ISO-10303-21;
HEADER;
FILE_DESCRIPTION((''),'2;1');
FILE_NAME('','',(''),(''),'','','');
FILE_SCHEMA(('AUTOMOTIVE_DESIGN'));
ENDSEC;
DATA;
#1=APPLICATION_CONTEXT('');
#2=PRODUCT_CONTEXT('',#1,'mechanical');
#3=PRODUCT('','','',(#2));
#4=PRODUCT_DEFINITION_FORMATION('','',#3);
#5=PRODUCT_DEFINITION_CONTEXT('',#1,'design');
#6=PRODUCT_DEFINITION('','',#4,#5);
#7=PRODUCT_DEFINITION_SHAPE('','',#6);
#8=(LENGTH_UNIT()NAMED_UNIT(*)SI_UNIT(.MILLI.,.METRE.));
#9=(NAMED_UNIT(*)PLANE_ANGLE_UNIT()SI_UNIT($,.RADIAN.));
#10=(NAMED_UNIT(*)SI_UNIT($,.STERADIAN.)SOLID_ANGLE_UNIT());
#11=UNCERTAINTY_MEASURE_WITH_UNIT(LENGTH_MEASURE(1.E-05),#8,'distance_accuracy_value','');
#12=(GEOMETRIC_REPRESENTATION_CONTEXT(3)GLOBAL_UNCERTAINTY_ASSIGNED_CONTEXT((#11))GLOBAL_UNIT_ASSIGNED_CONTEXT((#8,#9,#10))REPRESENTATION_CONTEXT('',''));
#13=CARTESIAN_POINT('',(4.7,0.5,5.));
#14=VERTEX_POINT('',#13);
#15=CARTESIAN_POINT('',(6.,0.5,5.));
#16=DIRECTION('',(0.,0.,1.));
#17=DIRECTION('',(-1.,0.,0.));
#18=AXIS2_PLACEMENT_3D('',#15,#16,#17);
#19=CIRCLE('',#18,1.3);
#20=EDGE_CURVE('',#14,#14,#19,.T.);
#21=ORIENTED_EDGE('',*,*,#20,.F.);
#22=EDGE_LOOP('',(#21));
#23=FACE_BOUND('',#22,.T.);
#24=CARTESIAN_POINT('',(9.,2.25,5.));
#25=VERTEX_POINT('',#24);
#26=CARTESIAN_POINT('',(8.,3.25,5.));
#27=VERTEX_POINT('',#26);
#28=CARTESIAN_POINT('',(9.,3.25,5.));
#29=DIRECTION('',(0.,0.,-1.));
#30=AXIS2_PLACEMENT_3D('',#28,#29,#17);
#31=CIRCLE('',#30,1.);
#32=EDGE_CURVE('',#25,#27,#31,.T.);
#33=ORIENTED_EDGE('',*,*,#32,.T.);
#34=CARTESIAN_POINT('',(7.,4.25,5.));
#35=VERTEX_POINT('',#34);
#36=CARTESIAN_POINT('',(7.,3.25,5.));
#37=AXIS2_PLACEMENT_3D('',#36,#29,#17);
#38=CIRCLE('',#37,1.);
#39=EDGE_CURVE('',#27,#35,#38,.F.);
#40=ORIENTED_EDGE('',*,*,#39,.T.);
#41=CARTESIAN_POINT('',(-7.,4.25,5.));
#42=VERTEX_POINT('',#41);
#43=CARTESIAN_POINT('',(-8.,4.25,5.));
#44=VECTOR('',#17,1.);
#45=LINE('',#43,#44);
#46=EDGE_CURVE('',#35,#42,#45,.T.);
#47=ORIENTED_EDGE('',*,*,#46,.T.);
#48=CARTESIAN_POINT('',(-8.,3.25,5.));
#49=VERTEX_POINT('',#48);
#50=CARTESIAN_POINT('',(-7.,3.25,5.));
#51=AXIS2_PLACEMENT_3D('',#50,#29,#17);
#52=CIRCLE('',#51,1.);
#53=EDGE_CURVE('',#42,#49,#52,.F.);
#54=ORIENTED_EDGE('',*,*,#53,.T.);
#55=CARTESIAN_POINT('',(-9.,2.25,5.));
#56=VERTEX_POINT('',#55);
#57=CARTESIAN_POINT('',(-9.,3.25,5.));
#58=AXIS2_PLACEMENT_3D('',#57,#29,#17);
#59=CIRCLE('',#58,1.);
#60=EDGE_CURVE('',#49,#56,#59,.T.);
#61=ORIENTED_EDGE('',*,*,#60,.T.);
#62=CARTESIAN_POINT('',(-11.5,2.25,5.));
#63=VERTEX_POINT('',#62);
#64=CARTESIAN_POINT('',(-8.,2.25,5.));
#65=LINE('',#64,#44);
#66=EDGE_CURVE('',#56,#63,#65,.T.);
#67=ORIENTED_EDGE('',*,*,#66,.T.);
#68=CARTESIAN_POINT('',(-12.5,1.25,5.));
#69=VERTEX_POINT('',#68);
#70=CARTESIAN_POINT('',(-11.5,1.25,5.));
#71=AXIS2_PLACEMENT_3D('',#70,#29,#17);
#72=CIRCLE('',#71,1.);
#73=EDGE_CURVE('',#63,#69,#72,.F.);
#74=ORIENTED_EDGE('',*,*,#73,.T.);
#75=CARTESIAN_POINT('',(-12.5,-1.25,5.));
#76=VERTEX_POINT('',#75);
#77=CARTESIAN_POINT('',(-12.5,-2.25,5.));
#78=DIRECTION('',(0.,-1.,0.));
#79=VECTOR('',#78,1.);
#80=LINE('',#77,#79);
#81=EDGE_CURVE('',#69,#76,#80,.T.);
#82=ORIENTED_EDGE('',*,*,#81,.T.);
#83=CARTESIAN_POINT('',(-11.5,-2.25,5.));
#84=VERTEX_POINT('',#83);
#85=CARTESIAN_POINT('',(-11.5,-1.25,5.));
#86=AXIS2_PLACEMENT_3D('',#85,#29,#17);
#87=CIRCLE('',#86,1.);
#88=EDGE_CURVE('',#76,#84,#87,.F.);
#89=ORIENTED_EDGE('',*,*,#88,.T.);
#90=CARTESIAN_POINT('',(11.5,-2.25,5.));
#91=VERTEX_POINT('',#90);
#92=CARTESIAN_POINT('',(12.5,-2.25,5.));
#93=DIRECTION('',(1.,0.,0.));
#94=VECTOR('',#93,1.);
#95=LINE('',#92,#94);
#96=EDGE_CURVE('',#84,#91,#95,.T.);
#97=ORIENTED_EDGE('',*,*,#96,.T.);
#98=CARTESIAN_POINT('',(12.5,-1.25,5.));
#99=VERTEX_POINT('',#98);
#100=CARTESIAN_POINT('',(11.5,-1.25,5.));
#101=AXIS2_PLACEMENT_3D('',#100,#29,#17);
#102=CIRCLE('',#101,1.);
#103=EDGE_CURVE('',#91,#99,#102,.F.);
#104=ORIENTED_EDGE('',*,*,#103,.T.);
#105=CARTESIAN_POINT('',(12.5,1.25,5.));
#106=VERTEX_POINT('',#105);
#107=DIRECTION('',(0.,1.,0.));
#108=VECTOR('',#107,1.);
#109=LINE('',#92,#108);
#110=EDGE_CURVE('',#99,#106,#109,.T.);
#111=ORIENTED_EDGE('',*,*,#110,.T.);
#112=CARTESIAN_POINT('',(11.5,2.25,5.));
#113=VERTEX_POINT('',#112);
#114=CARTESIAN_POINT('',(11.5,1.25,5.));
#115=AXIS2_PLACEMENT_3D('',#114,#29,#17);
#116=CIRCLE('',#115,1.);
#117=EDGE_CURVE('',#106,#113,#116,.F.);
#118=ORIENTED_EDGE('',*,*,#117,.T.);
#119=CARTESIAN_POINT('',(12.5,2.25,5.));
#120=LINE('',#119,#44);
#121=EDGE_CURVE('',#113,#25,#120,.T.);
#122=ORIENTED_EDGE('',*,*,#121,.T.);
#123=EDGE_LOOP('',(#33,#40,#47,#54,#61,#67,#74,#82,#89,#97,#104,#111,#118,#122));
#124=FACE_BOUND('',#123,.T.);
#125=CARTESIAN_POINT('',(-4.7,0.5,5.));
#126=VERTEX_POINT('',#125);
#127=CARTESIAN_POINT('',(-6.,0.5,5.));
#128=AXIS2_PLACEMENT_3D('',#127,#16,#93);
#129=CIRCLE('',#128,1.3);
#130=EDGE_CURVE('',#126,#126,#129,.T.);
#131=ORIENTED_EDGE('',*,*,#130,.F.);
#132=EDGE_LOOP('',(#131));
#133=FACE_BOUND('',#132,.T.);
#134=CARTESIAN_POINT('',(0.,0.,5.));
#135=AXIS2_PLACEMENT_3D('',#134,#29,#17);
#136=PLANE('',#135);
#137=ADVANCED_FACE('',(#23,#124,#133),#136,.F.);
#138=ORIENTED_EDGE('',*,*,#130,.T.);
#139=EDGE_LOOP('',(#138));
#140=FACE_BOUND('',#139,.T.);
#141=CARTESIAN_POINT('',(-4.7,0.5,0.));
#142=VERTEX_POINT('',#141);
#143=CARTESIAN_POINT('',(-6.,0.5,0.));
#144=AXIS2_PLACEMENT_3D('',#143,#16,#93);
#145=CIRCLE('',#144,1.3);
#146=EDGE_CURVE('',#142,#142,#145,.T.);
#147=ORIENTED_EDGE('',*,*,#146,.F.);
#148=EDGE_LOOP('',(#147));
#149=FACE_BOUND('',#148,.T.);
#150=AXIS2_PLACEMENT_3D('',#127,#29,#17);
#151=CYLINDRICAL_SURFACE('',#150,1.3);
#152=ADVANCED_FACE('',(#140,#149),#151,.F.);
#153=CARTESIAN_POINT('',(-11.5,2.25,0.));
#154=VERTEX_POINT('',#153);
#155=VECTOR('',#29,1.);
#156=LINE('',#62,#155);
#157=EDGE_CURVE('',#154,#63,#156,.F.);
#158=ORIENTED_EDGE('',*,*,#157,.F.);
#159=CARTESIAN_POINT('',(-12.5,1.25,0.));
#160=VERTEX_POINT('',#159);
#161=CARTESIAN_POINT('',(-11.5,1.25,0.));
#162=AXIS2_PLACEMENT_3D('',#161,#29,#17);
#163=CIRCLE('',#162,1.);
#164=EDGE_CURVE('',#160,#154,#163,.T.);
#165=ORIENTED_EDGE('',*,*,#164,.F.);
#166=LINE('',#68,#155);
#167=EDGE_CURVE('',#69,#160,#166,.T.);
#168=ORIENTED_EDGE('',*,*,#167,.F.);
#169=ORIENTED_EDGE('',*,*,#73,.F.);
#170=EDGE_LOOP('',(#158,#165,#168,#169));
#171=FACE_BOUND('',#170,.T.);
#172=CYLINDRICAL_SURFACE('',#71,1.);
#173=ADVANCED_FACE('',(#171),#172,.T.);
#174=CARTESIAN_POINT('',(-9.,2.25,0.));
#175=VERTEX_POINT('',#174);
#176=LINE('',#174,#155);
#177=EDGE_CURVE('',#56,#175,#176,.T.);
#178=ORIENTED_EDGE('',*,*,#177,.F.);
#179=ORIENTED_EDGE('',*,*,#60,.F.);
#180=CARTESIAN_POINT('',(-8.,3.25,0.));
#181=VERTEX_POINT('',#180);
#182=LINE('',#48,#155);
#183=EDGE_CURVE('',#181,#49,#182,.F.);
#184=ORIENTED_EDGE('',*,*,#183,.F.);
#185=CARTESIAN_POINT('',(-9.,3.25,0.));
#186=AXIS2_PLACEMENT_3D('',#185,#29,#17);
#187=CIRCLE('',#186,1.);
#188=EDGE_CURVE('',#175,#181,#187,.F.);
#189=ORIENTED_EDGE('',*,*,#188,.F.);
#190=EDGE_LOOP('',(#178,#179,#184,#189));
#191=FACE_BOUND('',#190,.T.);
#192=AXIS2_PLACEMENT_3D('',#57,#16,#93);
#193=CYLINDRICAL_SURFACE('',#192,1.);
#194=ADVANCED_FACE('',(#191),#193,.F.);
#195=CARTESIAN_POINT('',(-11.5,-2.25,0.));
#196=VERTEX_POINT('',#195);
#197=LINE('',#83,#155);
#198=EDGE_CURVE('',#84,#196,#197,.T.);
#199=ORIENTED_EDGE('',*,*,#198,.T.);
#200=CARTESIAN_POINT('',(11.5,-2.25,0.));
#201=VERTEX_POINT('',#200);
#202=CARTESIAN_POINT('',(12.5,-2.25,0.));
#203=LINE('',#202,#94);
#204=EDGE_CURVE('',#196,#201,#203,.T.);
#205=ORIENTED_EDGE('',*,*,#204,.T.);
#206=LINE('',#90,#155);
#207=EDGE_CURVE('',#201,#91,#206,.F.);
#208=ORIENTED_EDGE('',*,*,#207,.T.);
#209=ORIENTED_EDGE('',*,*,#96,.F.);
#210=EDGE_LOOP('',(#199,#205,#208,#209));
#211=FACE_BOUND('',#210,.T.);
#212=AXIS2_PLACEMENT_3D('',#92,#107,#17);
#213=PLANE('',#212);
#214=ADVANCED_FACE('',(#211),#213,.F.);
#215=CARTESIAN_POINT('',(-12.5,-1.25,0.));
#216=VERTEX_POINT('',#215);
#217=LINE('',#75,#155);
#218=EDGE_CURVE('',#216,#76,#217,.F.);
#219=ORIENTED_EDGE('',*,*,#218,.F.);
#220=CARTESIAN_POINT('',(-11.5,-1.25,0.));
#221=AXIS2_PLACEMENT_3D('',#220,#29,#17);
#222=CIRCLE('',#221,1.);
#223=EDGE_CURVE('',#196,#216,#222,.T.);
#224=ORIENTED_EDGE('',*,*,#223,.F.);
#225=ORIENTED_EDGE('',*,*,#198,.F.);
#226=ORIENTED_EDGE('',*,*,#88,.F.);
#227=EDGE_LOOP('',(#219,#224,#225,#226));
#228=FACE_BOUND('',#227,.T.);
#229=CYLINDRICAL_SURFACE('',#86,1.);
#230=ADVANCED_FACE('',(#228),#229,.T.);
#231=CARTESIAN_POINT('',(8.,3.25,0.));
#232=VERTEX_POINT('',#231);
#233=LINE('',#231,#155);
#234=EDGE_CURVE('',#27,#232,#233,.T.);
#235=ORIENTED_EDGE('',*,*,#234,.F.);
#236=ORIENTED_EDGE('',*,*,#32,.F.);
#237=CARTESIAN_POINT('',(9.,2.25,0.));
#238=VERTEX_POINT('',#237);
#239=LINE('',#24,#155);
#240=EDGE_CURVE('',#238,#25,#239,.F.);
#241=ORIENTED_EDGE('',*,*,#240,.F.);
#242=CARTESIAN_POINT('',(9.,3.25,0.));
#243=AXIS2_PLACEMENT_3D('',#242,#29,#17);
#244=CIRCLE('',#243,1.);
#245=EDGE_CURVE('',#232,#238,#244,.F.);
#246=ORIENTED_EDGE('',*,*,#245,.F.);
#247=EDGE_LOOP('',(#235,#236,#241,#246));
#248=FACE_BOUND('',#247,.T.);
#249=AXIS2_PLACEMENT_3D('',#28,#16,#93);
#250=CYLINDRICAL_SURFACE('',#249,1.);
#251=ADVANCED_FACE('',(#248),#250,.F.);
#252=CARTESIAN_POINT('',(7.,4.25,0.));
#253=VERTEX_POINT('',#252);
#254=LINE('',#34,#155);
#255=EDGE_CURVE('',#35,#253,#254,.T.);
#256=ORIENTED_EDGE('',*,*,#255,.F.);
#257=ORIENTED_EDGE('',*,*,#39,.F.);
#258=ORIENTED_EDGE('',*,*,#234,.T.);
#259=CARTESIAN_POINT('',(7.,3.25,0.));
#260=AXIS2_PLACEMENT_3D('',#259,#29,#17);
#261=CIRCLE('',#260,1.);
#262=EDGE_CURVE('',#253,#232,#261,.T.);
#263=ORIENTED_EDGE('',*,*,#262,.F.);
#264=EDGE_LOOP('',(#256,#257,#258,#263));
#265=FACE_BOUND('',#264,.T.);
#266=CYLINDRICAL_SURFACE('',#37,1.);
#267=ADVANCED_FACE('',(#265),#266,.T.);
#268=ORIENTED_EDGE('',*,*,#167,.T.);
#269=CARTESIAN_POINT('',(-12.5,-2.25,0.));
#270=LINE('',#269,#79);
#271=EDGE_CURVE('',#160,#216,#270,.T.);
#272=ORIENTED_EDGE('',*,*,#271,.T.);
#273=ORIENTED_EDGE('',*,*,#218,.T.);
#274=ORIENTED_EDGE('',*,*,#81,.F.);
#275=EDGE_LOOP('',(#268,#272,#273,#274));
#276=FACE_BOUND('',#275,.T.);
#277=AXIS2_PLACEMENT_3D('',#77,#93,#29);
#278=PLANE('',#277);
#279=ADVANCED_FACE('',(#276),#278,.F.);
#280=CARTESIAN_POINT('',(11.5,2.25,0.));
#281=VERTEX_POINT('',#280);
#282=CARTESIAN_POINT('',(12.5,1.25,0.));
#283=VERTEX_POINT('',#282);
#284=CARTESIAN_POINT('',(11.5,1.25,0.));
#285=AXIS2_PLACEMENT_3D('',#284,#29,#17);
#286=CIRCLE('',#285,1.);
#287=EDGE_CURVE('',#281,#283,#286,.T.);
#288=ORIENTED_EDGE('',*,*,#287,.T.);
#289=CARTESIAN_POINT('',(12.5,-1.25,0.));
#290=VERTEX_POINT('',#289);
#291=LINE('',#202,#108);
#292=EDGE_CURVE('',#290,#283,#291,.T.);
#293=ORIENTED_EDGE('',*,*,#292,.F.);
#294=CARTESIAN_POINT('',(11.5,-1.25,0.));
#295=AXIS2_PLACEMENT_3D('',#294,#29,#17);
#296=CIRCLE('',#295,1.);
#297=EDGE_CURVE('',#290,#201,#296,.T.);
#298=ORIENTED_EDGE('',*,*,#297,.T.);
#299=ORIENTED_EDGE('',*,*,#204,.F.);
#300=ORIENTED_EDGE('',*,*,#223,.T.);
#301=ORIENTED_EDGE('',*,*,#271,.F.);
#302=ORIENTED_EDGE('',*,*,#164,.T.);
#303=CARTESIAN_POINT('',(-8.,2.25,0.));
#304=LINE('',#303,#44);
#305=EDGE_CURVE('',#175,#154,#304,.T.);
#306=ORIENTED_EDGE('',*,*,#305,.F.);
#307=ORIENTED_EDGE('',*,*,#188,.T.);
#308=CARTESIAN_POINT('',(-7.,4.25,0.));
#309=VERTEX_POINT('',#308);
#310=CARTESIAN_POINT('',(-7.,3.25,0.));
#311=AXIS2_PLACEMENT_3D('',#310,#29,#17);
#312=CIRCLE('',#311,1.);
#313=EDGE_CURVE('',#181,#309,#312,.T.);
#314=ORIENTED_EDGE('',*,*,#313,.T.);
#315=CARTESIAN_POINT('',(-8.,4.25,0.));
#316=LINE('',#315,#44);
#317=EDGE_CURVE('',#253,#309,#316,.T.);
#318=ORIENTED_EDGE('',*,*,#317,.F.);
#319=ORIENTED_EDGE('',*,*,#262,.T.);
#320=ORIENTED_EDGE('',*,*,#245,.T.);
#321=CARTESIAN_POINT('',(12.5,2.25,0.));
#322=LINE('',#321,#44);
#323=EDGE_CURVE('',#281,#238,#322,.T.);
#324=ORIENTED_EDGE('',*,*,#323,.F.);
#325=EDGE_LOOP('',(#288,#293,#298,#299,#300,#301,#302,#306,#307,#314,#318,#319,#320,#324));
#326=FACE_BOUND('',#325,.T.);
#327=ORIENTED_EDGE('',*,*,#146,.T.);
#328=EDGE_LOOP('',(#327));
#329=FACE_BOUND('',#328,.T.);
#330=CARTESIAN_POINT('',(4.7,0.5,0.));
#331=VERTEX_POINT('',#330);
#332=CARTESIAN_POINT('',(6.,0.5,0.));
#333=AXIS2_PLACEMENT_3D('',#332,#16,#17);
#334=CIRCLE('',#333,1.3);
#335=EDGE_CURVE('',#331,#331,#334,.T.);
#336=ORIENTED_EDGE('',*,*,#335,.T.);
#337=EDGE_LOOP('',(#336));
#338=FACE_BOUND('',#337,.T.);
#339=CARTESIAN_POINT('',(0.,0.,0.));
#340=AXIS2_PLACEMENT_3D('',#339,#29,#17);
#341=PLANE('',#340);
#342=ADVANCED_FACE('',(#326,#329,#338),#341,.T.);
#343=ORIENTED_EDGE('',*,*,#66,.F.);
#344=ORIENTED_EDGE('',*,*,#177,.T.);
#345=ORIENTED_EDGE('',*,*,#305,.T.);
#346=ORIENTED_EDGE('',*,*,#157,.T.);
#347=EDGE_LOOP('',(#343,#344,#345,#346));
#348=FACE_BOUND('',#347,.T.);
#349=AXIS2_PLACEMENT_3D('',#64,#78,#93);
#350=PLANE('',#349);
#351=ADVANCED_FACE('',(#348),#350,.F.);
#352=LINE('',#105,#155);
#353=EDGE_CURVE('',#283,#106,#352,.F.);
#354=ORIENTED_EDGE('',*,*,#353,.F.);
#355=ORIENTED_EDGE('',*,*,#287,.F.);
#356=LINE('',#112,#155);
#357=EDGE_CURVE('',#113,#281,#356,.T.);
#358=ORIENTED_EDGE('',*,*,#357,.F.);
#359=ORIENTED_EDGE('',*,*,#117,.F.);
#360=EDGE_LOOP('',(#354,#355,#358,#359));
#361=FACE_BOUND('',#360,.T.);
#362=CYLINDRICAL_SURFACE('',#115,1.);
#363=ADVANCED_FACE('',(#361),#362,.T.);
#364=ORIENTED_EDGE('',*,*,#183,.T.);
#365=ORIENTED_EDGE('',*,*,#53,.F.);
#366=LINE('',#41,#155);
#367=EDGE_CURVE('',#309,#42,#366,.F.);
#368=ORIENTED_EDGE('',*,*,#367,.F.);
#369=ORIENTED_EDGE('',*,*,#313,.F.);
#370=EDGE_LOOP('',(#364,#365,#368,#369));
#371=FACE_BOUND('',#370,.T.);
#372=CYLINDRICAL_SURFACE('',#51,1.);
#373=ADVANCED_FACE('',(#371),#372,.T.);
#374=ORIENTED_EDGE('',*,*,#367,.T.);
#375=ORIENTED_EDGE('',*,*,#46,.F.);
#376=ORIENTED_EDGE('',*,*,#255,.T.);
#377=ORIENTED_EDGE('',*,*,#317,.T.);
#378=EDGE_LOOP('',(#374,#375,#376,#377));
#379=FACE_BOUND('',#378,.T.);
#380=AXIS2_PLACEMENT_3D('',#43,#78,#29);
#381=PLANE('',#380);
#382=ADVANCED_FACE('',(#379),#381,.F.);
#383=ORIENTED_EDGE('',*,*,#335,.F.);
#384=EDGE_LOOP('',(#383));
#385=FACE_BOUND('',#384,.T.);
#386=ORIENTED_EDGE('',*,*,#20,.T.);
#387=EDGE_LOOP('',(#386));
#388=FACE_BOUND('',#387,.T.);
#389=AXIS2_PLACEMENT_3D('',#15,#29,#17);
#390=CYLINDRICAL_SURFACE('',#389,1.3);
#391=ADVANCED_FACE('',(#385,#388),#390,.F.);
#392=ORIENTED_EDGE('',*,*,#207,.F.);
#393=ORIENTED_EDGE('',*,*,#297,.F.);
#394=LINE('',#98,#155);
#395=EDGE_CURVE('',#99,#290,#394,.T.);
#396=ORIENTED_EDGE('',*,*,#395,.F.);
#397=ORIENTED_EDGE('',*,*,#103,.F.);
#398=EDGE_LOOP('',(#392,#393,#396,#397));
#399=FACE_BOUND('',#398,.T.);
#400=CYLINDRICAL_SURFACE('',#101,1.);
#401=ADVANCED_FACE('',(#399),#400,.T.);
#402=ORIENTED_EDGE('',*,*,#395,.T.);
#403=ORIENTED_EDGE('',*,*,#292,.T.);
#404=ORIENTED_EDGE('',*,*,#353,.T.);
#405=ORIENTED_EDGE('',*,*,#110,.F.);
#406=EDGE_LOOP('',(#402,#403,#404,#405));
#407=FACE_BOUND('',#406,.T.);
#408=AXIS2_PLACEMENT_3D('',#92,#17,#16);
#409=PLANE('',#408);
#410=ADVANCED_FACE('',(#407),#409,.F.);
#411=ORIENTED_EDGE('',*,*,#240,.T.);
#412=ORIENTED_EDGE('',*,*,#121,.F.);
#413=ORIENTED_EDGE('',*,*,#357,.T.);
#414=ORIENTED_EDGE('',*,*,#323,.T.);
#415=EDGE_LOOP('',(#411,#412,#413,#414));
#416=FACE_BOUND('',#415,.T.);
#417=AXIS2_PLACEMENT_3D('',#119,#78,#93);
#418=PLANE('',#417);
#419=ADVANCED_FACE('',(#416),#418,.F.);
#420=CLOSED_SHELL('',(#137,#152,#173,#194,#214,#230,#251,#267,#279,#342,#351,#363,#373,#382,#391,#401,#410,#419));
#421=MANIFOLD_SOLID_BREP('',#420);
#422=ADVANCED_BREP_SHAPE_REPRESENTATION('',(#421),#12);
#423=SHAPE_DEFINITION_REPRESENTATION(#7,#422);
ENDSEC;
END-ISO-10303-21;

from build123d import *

# Parameters (mm, degrees)
SKETCH_1_R      = 1.3
EXTRUDE_1_DEPTH = 5
FILLET_1_R      = 1


with BuildPart() as part:
    # 草图1 → 凸台-拉伸1 (new body)
    with BuildSketch(Plane.XY):
        Polygon((12.5, -2.25), (-12.5, -2.25), (-12.5, 2.25), (-8, 2.25), (-8, 4.25), (8, 4.25), (8, 2.25), (12.5, 2.25), align=None)
        with Locations((-6, 0.5)):
            Circle(SKETCH_1_R, mode=Mode.SUBTRACT)
        with Locations(Location((6, 0.5, 0), (0, 0, 180))):
            Circle(SKETCH_1_R, mode=Mode.SUBTRACT)
    extrude(amount=EXTRUDE_1_DEPTH)

    # 圆角1
    fillet_1_edges = [part.edges().sort_by_distance(p)[0] for p in [
        (12.5, -2.25, 2.5),
        (12.5, 2.25, 2.5),
        (-12.5, -2.25, 2.5),
        (-12.5, 2.25, 2.5),
        (-8, 4.25, 2.5),
        (8, 4.25, 2.5),
        (8, 2.25, 2.5),
        (-8, 2.25, 2.5),
    ]]
    fillet(fillet_1_edges, radius=FILLET_1_R - 0.0001)  # a hair under: the kernel refuses the full size


solid = part.part
